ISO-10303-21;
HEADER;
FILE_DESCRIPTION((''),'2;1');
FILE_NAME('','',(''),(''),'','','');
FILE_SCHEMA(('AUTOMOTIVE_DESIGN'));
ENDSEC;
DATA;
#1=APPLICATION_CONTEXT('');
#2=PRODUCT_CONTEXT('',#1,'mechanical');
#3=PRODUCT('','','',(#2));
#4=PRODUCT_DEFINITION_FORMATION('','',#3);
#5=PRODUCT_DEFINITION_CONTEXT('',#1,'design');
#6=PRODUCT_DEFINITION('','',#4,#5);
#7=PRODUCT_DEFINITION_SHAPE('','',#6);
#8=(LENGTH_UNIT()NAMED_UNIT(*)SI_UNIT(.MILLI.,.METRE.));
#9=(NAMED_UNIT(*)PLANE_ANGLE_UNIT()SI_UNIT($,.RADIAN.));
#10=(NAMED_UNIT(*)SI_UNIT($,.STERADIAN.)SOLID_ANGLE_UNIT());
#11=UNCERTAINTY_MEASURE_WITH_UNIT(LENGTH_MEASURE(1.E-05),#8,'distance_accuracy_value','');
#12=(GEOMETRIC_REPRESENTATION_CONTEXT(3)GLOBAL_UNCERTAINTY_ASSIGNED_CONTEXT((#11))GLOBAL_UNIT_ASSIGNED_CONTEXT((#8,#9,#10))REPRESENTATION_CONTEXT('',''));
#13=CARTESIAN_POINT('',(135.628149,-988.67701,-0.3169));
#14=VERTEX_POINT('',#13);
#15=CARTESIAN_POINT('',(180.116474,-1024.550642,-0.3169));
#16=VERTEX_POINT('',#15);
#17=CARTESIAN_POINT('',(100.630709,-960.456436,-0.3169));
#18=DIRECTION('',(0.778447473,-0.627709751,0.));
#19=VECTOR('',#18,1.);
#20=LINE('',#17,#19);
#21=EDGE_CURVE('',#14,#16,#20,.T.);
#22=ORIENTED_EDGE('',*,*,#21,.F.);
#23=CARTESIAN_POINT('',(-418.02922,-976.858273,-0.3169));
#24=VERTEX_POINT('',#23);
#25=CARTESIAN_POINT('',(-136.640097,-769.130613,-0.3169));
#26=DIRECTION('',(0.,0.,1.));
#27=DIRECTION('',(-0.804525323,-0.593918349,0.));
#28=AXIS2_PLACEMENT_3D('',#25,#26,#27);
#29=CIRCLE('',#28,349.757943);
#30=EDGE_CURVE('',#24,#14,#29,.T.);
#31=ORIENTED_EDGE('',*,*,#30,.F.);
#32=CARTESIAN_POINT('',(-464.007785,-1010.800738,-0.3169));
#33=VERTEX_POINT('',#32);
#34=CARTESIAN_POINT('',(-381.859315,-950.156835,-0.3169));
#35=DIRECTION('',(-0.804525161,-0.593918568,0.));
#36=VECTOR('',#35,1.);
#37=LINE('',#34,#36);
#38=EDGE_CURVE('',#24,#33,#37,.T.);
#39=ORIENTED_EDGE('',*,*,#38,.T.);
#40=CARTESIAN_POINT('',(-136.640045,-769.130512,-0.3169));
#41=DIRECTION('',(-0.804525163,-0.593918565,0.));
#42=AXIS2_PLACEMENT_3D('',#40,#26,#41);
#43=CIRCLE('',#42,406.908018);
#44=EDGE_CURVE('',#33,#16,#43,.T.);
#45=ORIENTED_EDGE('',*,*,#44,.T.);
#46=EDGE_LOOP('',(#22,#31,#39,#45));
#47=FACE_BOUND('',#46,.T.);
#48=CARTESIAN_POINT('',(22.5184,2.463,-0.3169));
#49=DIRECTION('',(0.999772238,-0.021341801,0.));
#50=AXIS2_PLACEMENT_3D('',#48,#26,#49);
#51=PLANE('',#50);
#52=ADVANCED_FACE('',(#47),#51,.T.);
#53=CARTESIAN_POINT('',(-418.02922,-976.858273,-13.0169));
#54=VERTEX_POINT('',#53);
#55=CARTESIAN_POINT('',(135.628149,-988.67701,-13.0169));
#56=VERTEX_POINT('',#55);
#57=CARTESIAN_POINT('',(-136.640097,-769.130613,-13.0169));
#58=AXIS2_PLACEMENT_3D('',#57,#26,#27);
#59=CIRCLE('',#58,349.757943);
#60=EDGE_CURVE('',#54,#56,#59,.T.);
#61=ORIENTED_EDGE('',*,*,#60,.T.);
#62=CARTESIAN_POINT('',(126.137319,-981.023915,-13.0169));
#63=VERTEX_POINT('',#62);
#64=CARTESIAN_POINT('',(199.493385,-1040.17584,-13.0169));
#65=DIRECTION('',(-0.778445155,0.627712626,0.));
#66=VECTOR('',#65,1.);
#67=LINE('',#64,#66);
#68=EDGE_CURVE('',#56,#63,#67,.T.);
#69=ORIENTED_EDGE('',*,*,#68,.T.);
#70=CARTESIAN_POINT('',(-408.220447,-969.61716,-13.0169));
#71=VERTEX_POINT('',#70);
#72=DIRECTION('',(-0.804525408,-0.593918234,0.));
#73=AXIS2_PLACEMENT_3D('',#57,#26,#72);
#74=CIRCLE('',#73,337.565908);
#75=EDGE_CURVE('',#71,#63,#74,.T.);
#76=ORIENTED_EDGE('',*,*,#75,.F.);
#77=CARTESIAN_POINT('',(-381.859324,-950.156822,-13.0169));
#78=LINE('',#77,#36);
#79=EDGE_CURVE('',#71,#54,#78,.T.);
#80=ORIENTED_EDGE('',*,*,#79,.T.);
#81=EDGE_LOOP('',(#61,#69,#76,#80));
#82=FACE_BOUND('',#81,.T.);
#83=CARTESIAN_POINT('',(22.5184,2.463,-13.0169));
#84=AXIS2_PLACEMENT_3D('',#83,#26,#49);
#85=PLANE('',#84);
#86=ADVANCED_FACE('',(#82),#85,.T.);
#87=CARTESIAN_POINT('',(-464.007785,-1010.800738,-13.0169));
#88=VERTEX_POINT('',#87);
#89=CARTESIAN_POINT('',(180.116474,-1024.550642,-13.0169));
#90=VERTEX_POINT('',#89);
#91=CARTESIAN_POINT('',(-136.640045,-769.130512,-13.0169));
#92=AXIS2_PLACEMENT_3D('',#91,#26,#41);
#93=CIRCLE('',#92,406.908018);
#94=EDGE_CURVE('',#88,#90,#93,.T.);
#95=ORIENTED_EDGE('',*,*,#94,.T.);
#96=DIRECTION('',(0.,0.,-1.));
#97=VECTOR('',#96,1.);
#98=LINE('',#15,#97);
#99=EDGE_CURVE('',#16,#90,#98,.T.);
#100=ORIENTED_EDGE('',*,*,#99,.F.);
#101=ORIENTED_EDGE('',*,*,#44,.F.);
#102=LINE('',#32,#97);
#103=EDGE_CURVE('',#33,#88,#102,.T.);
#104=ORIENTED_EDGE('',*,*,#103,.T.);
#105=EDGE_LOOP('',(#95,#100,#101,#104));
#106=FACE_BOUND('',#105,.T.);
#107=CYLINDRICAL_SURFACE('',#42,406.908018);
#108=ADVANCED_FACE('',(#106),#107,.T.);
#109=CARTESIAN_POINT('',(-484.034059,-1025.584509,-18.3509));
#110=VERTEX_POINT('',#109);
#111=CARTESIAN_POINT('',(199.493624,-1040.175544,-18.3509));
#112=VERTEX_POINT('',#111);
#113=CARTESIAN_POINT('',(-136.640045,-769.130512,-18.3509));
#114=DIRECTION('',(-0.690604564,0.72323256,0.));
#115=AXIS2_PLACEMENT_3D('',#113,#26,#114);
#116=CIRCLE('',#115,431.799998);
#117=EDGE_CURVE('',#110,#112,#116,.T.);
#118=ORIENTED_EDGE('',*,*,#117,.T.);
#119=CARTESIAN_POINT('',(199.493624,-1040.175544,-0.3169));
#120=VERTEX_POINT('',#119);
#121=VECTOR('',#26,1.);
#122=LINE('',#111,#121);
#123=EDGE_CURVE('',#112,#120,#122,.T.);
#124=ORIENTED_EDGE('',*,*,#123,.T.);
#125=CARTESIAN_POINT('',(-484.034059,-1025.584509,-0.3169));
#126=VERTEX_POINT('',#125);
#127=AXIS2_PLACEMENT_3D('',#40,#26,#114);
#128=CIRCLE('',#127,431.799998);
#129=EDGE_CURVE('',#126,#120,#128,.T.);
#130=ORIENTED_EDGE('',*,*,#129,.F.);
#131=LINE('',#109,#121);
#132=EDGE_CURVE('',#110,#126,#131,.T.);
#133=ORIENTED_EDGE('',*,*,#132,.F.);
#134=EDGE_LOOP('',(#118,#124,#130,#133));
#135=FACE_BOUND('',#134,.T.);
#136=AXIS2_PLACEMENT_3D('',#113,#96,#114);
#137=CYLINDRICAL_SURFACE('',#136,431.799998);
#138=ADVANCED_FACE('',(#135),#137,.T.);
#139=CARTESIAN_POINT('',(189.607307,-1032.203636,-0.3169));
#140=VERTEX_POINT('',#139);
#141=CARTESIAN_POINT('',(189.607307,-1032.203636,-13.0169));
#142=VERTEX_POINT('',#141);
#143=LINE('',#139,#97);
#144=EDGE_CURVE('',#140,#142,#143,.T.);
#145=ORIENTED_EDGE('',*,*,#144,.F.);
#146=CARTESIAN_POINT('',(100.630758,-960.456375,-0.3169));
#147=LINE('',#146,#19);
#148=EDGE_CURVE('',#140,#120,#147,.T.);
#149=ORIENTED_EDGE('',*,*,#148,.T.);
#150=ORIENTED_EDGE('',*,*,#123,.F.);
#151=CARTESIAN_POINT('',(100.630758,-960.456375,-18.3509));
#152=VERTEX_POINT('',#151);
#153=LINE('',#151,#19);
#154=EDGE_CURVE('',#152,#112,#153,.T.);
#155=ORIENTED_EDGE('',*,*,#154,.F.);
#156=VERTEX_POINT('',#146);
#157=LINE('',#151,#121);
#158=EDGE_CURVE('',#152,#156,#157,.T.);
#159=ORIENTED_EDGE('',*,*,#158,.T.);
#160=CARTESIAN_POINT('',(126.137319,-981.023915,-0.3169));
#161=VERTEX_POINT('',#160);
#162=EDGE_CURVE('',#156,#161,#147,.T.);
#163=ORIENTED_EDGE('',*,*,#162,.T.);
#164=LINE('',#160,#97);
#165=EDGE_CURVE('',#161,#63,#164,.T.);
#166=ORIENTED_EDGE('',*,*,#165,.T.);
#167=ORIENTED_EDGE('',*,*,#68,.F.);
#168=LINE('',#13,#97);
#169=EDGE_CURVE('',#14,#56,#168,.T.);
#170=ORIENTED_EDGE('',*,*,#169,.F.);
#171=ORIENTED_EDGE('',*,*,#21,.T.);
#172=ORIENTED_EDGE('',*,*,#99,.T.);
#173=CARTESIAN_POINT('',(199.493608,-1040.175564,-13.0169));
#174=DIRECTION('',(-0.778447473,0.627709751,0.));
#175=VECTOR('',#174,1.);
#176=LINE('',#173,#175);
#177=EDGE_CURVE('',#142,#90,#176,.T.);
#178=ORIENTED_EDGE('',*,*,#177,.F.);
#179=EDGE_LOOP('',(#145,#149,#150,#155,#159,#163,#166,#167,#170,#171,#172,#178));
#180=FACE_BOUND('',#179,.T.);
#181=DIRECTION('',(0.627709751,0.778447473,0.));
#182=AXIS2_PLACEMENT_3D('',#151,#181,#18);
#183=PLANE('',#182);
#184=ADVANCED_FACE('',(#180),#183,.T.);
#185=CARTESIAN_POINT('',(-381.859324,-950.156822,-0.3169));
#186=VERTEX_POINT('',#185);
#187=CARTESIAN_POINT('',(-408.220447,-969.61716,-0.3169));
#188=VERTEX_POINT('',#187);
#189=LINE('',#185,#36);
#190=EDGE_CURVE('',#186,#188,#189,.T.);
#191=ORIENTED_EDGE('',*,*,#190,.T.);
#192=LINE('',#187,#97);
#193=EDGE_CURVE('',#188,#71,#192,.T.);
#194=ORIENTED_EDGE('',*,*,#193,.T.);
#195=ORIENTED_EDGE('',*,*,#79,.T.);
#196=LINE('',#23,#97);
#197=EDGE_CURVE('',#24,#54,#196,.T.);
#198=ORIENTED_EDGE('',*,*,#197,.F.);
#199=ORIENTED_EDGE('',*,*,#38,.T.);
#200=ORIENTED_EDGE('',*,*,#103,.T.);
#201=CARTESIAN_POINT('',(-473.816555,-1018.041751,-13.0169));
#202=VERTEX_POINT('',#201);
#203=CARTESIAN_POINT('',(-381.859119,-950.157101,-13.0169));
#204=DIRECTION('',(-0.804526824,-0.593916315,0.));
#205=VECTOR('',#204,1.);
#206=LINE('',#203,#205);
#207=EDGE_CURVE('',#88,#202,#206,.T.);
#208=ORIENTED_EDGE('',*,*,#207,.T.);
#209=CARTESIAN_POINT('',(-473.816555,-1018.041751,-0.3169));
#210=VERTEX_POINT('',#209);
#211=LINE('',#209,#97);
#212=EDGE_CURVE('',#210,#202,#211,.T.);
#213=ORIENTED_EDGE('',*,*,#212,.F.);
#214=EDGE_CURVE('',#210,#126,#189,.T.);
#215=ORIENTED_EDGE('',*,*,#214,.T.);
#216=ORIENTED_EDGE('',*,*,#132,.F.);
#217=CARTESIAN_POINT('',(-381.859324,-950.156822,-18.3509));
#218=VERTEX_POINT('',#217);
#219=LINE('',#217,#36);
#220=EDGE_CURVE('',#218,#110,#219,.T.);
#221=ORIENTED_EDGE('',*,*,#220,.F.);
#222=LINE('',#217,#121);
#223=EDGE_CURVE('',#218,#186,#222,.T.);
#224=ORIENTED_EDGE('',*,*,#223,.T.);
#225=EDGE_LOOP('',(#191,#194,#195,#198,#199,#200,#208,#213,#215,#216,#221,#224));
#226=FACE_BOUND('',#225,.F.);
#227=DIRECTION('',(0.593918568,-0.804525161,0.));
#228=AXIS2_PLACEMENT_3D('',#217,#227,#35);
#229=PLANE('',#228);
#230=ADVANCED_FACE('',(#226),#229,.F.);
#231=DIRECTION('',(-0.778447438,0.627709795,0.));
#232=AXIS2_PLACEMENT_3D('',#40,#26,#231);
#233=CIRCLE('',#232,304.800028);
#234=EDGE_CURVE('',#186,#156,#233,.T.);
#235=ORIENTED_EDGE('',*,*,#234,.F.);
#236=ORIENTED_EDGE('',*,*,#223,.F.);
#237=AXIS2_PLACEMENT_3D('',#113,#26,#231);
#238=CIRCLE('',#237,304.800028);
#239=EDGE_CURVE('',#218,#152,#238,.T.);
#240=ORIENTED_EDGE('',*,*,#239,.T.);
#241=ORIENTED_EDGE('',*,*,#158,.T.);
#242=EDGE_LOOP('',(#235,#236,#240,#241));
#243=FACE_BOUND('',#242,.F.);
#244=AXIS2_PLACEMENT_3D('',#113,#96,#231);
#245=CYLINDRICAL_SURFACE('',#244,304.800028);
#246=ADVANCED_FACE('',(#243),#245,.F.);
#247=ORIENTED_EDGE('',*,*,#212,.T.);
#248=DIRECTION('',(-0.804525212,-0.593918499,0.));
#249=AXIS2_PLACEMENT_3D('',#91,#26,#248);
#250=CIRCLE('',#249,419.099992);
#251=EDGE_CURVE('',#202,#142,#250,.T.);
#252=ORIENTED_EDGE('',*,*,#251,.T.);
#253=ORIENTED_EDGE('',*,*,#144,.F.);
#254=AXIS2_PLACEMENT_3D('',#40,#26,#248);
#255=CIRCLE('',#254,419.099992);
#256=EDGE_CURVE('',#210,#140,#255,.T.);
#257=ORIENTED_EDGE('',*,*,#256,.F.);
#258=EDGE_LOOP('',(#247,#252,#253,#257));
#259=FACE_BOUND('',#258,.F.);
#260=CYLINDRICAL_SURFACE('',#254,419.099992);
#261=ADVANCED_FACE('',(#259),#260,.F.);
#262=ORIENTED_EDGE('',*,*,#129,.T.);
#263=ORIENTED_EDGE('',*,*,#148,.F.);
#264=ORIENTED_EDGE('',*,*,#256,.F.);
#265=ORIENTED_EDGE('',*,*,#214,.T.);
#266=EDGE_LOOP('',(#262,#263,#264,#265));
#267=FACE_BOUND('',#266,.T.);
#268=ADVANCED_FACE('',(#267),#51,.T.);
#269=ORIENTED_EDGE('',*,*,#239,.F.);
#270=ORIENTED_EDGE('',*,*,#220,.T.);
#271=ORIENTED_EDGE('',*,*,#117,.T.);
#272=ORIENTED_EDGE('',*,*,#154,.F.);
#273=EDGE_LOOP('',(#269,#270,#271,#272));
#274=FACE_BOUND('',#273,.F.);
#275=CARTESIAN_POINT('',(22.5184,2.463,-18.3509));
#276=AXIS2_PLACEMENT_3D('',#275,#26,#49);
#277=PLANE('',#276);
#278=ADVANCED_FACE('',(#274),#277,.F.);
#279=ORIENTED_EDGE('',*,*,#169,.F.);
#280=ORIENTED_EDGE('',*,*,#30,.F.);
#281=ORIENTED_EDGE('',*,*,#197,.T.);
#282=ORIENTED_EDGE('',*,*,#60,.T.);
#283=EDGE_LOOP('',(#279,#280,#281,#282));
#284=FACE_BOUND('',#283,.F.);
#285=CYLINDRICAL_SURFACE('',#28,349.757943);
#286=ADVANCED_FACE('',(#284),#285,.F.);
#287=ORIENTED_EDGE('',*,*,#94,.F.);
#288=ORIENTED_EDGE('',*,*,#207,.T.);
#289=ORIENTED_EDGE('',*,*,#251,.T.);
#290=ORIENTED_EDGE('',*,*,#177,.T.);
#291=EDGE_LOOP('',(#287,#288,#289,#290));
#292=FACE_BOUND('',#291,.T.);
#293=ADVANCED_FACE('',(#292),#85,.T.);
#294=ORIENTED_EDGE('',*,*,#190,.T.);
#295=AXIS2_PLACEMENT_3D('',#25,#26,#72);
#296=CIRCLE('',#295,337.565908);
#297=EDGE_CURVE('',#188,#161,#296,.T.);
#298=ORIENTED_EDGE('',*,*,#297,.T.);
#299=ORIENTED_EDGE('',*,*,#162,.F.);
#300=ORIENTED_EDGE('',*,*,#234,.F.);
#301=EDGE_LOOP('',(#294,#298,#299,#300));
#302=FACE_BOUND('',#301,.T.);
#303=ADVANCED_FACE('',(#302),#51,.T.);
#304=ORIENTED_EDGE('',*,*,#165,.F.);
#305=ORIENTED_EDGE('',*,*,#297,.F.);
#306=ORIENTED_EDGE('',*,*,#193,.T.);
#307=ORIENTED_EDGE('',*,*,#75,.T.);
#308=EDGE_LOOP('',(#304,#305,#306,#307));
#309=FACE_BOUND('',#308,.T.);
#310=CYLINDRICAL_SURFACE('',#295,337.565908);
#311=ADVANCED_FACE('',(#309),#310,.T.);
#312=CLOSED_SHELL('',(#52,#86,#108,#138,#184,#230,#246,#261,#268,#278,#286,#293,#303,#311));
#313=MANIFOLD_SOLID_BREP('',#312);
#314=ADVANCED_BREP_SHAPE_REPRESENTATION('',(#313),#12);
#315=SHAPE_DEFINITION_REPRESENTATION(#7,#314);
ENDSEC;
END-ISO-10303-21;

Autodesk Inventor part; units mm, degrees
ref_plane "YZ Plane" through (0, 0, 0) normal (1, 0, 0) x (0, 1, 0)
ref_plane "XZ Plane" through (0, 0, 0) normal (0, 1, 0) x (-1, 0, 0)
ref_plane "Work Plane1" through (22.5184, 2.463, -18.3509) normal (0, 0, 1) x (0.9997722, -0.0213418, 0)
sketch "ThermoBulbBorder" plane through (22.5184, 2.463, -18.3509) normal (0, 0, 1) x (0.9997722, -0.0213418, 0)
  arc A0 (-447.455, -468.958) -> (162.145, -468.958) centre (-142.655, -774.8145) ccw
  arc A1 (-447.455, -468.958) -> (162.145, -468.958) centre (-142.655, -774.8145) ccw
  arc A2 (-383.955, -588.5959) -> (98.645, -588.5959) centre (-142.655, -774.8145) ccw
  line L0 (-447.455, -468.958) -> (-383.955, -468.958)
  line L1 (-383.955, -468.958) -> (-383.955, -588.5959)
  line L2 (162.145, -468.958) -> (98.645, -468.958)
  line L3 (98.645, -468.958) -> (98.645, -588.5959)
  line L4 (-383.955, -961.033) -> (-484.4967, -1038.6241)
  line L5 (98.645, -961.033) -> (199.1867, -1038.6241)
  arc A3 (-447.455, -468.958) -> (162.145, -468.958) centre (-142.655, -774.8145) ccw projected
  circle A4 centre (-142.655, -774.8145) radius 419.1 construction
  circle A5 centre (-142.655, -774.8145) radius 406.908 construction
  circle A6 centre (-142.655, -774.8145) radius 349.758 construction
  circle A7 centre (-142.655, -774.8145) radius 337.566 construction
  line L6 (98.645, -468.958) -> (98.645, -316.558) construction
  line L7 (-383.955, -468.958) -> (-383.955, -316.558) construction
  dimension "d0" = 609.6
  dimension "d5" = 63.5
  dimension "d6" = 63.5
  dimension "d7" = 838.2
  dimension "d8" = 12.192
  dimension "d9" = 12.192
  dimension "d10" = 57.15
  dimension "d11" = 32.766
  dimension "d12" = 152.4
extrude "Extrusion2" add sketch "ThermoBulbBorder" along normal blind 18.034 contours L4 A2 L5 A0
sketch "Sketch2" plane through (22.5184, 2.463, -0.3169) normal (0, 0, 1) x (0.9997722, -0.0213418, 0)
  line L0 (-383.955, -961.033) -> (-484.4967, -1038.6241) projected
  arc A0 (-484.4967, -1038.6241) -> (199.1867, -1038.6241) centre (-142.655, -774.8145) ccw projected
  line L1 (199.1867, -1038.6241) -> (98.645, -961.033) projected
  arc A1 (-383.955, -961.033) -> (98.645, -961.033) centre (-142.655, -774.8145) ccw projected
  arc A2 (-409.8948, -981.0515) -> (124.5847, -981.0515) centre (-142.655, -774.8145) ccw
  arc A3 (-419.5468, -988.5003) -> (134.2367, -988.5003) centre (-142.655, -774.8145) ccw
  arc A4 (-464.7905, -1023.4163) -> (179.4805, -1023.4163) centre (-142.655, -774.8145) ccw
  arc A5 (-474.4425, -1030.865) -> (189.1325, -1030.865) centre (-142.655, -774.8145) ccw
  line L2 (-474.4425, -1030.865) -> (-464.7905, -1023.4163)
  line L3 (-419.5468, -988.5003) -> (-409.8948, -981.0515)
  line L4 (124.5847, -981.0515) -> (134.2367, -988.5003)
  line L5 (179.4805, -1023.4163) -> (189.1325, -1030.865)
  point P0 (-22.4607, -2.943)
  dimension "d15" = 12.192
  dimension "d17" = 12.7
  dimension "d18" = 57.15
  dimension "d19" = 12.192
extrude "Extrusion3" cut sketch "Sketch2" against normal blind 12.7 contours A2 L1 A3 L0 | A4 L1 A5 L0
equation "\"d6\" = d5"
equation "\"d8\" = bRopeChannel"
equation "\"d9\" = bRopeChannel"
equation "\"d15\" = bRopeChannel"
equation "\"d19\" = bRopeChannel"
equation "\"bRopeChannel\" = 12.192"
properties part number "HOT Thermo bulb outline B" material "Rubber, Butyl"
